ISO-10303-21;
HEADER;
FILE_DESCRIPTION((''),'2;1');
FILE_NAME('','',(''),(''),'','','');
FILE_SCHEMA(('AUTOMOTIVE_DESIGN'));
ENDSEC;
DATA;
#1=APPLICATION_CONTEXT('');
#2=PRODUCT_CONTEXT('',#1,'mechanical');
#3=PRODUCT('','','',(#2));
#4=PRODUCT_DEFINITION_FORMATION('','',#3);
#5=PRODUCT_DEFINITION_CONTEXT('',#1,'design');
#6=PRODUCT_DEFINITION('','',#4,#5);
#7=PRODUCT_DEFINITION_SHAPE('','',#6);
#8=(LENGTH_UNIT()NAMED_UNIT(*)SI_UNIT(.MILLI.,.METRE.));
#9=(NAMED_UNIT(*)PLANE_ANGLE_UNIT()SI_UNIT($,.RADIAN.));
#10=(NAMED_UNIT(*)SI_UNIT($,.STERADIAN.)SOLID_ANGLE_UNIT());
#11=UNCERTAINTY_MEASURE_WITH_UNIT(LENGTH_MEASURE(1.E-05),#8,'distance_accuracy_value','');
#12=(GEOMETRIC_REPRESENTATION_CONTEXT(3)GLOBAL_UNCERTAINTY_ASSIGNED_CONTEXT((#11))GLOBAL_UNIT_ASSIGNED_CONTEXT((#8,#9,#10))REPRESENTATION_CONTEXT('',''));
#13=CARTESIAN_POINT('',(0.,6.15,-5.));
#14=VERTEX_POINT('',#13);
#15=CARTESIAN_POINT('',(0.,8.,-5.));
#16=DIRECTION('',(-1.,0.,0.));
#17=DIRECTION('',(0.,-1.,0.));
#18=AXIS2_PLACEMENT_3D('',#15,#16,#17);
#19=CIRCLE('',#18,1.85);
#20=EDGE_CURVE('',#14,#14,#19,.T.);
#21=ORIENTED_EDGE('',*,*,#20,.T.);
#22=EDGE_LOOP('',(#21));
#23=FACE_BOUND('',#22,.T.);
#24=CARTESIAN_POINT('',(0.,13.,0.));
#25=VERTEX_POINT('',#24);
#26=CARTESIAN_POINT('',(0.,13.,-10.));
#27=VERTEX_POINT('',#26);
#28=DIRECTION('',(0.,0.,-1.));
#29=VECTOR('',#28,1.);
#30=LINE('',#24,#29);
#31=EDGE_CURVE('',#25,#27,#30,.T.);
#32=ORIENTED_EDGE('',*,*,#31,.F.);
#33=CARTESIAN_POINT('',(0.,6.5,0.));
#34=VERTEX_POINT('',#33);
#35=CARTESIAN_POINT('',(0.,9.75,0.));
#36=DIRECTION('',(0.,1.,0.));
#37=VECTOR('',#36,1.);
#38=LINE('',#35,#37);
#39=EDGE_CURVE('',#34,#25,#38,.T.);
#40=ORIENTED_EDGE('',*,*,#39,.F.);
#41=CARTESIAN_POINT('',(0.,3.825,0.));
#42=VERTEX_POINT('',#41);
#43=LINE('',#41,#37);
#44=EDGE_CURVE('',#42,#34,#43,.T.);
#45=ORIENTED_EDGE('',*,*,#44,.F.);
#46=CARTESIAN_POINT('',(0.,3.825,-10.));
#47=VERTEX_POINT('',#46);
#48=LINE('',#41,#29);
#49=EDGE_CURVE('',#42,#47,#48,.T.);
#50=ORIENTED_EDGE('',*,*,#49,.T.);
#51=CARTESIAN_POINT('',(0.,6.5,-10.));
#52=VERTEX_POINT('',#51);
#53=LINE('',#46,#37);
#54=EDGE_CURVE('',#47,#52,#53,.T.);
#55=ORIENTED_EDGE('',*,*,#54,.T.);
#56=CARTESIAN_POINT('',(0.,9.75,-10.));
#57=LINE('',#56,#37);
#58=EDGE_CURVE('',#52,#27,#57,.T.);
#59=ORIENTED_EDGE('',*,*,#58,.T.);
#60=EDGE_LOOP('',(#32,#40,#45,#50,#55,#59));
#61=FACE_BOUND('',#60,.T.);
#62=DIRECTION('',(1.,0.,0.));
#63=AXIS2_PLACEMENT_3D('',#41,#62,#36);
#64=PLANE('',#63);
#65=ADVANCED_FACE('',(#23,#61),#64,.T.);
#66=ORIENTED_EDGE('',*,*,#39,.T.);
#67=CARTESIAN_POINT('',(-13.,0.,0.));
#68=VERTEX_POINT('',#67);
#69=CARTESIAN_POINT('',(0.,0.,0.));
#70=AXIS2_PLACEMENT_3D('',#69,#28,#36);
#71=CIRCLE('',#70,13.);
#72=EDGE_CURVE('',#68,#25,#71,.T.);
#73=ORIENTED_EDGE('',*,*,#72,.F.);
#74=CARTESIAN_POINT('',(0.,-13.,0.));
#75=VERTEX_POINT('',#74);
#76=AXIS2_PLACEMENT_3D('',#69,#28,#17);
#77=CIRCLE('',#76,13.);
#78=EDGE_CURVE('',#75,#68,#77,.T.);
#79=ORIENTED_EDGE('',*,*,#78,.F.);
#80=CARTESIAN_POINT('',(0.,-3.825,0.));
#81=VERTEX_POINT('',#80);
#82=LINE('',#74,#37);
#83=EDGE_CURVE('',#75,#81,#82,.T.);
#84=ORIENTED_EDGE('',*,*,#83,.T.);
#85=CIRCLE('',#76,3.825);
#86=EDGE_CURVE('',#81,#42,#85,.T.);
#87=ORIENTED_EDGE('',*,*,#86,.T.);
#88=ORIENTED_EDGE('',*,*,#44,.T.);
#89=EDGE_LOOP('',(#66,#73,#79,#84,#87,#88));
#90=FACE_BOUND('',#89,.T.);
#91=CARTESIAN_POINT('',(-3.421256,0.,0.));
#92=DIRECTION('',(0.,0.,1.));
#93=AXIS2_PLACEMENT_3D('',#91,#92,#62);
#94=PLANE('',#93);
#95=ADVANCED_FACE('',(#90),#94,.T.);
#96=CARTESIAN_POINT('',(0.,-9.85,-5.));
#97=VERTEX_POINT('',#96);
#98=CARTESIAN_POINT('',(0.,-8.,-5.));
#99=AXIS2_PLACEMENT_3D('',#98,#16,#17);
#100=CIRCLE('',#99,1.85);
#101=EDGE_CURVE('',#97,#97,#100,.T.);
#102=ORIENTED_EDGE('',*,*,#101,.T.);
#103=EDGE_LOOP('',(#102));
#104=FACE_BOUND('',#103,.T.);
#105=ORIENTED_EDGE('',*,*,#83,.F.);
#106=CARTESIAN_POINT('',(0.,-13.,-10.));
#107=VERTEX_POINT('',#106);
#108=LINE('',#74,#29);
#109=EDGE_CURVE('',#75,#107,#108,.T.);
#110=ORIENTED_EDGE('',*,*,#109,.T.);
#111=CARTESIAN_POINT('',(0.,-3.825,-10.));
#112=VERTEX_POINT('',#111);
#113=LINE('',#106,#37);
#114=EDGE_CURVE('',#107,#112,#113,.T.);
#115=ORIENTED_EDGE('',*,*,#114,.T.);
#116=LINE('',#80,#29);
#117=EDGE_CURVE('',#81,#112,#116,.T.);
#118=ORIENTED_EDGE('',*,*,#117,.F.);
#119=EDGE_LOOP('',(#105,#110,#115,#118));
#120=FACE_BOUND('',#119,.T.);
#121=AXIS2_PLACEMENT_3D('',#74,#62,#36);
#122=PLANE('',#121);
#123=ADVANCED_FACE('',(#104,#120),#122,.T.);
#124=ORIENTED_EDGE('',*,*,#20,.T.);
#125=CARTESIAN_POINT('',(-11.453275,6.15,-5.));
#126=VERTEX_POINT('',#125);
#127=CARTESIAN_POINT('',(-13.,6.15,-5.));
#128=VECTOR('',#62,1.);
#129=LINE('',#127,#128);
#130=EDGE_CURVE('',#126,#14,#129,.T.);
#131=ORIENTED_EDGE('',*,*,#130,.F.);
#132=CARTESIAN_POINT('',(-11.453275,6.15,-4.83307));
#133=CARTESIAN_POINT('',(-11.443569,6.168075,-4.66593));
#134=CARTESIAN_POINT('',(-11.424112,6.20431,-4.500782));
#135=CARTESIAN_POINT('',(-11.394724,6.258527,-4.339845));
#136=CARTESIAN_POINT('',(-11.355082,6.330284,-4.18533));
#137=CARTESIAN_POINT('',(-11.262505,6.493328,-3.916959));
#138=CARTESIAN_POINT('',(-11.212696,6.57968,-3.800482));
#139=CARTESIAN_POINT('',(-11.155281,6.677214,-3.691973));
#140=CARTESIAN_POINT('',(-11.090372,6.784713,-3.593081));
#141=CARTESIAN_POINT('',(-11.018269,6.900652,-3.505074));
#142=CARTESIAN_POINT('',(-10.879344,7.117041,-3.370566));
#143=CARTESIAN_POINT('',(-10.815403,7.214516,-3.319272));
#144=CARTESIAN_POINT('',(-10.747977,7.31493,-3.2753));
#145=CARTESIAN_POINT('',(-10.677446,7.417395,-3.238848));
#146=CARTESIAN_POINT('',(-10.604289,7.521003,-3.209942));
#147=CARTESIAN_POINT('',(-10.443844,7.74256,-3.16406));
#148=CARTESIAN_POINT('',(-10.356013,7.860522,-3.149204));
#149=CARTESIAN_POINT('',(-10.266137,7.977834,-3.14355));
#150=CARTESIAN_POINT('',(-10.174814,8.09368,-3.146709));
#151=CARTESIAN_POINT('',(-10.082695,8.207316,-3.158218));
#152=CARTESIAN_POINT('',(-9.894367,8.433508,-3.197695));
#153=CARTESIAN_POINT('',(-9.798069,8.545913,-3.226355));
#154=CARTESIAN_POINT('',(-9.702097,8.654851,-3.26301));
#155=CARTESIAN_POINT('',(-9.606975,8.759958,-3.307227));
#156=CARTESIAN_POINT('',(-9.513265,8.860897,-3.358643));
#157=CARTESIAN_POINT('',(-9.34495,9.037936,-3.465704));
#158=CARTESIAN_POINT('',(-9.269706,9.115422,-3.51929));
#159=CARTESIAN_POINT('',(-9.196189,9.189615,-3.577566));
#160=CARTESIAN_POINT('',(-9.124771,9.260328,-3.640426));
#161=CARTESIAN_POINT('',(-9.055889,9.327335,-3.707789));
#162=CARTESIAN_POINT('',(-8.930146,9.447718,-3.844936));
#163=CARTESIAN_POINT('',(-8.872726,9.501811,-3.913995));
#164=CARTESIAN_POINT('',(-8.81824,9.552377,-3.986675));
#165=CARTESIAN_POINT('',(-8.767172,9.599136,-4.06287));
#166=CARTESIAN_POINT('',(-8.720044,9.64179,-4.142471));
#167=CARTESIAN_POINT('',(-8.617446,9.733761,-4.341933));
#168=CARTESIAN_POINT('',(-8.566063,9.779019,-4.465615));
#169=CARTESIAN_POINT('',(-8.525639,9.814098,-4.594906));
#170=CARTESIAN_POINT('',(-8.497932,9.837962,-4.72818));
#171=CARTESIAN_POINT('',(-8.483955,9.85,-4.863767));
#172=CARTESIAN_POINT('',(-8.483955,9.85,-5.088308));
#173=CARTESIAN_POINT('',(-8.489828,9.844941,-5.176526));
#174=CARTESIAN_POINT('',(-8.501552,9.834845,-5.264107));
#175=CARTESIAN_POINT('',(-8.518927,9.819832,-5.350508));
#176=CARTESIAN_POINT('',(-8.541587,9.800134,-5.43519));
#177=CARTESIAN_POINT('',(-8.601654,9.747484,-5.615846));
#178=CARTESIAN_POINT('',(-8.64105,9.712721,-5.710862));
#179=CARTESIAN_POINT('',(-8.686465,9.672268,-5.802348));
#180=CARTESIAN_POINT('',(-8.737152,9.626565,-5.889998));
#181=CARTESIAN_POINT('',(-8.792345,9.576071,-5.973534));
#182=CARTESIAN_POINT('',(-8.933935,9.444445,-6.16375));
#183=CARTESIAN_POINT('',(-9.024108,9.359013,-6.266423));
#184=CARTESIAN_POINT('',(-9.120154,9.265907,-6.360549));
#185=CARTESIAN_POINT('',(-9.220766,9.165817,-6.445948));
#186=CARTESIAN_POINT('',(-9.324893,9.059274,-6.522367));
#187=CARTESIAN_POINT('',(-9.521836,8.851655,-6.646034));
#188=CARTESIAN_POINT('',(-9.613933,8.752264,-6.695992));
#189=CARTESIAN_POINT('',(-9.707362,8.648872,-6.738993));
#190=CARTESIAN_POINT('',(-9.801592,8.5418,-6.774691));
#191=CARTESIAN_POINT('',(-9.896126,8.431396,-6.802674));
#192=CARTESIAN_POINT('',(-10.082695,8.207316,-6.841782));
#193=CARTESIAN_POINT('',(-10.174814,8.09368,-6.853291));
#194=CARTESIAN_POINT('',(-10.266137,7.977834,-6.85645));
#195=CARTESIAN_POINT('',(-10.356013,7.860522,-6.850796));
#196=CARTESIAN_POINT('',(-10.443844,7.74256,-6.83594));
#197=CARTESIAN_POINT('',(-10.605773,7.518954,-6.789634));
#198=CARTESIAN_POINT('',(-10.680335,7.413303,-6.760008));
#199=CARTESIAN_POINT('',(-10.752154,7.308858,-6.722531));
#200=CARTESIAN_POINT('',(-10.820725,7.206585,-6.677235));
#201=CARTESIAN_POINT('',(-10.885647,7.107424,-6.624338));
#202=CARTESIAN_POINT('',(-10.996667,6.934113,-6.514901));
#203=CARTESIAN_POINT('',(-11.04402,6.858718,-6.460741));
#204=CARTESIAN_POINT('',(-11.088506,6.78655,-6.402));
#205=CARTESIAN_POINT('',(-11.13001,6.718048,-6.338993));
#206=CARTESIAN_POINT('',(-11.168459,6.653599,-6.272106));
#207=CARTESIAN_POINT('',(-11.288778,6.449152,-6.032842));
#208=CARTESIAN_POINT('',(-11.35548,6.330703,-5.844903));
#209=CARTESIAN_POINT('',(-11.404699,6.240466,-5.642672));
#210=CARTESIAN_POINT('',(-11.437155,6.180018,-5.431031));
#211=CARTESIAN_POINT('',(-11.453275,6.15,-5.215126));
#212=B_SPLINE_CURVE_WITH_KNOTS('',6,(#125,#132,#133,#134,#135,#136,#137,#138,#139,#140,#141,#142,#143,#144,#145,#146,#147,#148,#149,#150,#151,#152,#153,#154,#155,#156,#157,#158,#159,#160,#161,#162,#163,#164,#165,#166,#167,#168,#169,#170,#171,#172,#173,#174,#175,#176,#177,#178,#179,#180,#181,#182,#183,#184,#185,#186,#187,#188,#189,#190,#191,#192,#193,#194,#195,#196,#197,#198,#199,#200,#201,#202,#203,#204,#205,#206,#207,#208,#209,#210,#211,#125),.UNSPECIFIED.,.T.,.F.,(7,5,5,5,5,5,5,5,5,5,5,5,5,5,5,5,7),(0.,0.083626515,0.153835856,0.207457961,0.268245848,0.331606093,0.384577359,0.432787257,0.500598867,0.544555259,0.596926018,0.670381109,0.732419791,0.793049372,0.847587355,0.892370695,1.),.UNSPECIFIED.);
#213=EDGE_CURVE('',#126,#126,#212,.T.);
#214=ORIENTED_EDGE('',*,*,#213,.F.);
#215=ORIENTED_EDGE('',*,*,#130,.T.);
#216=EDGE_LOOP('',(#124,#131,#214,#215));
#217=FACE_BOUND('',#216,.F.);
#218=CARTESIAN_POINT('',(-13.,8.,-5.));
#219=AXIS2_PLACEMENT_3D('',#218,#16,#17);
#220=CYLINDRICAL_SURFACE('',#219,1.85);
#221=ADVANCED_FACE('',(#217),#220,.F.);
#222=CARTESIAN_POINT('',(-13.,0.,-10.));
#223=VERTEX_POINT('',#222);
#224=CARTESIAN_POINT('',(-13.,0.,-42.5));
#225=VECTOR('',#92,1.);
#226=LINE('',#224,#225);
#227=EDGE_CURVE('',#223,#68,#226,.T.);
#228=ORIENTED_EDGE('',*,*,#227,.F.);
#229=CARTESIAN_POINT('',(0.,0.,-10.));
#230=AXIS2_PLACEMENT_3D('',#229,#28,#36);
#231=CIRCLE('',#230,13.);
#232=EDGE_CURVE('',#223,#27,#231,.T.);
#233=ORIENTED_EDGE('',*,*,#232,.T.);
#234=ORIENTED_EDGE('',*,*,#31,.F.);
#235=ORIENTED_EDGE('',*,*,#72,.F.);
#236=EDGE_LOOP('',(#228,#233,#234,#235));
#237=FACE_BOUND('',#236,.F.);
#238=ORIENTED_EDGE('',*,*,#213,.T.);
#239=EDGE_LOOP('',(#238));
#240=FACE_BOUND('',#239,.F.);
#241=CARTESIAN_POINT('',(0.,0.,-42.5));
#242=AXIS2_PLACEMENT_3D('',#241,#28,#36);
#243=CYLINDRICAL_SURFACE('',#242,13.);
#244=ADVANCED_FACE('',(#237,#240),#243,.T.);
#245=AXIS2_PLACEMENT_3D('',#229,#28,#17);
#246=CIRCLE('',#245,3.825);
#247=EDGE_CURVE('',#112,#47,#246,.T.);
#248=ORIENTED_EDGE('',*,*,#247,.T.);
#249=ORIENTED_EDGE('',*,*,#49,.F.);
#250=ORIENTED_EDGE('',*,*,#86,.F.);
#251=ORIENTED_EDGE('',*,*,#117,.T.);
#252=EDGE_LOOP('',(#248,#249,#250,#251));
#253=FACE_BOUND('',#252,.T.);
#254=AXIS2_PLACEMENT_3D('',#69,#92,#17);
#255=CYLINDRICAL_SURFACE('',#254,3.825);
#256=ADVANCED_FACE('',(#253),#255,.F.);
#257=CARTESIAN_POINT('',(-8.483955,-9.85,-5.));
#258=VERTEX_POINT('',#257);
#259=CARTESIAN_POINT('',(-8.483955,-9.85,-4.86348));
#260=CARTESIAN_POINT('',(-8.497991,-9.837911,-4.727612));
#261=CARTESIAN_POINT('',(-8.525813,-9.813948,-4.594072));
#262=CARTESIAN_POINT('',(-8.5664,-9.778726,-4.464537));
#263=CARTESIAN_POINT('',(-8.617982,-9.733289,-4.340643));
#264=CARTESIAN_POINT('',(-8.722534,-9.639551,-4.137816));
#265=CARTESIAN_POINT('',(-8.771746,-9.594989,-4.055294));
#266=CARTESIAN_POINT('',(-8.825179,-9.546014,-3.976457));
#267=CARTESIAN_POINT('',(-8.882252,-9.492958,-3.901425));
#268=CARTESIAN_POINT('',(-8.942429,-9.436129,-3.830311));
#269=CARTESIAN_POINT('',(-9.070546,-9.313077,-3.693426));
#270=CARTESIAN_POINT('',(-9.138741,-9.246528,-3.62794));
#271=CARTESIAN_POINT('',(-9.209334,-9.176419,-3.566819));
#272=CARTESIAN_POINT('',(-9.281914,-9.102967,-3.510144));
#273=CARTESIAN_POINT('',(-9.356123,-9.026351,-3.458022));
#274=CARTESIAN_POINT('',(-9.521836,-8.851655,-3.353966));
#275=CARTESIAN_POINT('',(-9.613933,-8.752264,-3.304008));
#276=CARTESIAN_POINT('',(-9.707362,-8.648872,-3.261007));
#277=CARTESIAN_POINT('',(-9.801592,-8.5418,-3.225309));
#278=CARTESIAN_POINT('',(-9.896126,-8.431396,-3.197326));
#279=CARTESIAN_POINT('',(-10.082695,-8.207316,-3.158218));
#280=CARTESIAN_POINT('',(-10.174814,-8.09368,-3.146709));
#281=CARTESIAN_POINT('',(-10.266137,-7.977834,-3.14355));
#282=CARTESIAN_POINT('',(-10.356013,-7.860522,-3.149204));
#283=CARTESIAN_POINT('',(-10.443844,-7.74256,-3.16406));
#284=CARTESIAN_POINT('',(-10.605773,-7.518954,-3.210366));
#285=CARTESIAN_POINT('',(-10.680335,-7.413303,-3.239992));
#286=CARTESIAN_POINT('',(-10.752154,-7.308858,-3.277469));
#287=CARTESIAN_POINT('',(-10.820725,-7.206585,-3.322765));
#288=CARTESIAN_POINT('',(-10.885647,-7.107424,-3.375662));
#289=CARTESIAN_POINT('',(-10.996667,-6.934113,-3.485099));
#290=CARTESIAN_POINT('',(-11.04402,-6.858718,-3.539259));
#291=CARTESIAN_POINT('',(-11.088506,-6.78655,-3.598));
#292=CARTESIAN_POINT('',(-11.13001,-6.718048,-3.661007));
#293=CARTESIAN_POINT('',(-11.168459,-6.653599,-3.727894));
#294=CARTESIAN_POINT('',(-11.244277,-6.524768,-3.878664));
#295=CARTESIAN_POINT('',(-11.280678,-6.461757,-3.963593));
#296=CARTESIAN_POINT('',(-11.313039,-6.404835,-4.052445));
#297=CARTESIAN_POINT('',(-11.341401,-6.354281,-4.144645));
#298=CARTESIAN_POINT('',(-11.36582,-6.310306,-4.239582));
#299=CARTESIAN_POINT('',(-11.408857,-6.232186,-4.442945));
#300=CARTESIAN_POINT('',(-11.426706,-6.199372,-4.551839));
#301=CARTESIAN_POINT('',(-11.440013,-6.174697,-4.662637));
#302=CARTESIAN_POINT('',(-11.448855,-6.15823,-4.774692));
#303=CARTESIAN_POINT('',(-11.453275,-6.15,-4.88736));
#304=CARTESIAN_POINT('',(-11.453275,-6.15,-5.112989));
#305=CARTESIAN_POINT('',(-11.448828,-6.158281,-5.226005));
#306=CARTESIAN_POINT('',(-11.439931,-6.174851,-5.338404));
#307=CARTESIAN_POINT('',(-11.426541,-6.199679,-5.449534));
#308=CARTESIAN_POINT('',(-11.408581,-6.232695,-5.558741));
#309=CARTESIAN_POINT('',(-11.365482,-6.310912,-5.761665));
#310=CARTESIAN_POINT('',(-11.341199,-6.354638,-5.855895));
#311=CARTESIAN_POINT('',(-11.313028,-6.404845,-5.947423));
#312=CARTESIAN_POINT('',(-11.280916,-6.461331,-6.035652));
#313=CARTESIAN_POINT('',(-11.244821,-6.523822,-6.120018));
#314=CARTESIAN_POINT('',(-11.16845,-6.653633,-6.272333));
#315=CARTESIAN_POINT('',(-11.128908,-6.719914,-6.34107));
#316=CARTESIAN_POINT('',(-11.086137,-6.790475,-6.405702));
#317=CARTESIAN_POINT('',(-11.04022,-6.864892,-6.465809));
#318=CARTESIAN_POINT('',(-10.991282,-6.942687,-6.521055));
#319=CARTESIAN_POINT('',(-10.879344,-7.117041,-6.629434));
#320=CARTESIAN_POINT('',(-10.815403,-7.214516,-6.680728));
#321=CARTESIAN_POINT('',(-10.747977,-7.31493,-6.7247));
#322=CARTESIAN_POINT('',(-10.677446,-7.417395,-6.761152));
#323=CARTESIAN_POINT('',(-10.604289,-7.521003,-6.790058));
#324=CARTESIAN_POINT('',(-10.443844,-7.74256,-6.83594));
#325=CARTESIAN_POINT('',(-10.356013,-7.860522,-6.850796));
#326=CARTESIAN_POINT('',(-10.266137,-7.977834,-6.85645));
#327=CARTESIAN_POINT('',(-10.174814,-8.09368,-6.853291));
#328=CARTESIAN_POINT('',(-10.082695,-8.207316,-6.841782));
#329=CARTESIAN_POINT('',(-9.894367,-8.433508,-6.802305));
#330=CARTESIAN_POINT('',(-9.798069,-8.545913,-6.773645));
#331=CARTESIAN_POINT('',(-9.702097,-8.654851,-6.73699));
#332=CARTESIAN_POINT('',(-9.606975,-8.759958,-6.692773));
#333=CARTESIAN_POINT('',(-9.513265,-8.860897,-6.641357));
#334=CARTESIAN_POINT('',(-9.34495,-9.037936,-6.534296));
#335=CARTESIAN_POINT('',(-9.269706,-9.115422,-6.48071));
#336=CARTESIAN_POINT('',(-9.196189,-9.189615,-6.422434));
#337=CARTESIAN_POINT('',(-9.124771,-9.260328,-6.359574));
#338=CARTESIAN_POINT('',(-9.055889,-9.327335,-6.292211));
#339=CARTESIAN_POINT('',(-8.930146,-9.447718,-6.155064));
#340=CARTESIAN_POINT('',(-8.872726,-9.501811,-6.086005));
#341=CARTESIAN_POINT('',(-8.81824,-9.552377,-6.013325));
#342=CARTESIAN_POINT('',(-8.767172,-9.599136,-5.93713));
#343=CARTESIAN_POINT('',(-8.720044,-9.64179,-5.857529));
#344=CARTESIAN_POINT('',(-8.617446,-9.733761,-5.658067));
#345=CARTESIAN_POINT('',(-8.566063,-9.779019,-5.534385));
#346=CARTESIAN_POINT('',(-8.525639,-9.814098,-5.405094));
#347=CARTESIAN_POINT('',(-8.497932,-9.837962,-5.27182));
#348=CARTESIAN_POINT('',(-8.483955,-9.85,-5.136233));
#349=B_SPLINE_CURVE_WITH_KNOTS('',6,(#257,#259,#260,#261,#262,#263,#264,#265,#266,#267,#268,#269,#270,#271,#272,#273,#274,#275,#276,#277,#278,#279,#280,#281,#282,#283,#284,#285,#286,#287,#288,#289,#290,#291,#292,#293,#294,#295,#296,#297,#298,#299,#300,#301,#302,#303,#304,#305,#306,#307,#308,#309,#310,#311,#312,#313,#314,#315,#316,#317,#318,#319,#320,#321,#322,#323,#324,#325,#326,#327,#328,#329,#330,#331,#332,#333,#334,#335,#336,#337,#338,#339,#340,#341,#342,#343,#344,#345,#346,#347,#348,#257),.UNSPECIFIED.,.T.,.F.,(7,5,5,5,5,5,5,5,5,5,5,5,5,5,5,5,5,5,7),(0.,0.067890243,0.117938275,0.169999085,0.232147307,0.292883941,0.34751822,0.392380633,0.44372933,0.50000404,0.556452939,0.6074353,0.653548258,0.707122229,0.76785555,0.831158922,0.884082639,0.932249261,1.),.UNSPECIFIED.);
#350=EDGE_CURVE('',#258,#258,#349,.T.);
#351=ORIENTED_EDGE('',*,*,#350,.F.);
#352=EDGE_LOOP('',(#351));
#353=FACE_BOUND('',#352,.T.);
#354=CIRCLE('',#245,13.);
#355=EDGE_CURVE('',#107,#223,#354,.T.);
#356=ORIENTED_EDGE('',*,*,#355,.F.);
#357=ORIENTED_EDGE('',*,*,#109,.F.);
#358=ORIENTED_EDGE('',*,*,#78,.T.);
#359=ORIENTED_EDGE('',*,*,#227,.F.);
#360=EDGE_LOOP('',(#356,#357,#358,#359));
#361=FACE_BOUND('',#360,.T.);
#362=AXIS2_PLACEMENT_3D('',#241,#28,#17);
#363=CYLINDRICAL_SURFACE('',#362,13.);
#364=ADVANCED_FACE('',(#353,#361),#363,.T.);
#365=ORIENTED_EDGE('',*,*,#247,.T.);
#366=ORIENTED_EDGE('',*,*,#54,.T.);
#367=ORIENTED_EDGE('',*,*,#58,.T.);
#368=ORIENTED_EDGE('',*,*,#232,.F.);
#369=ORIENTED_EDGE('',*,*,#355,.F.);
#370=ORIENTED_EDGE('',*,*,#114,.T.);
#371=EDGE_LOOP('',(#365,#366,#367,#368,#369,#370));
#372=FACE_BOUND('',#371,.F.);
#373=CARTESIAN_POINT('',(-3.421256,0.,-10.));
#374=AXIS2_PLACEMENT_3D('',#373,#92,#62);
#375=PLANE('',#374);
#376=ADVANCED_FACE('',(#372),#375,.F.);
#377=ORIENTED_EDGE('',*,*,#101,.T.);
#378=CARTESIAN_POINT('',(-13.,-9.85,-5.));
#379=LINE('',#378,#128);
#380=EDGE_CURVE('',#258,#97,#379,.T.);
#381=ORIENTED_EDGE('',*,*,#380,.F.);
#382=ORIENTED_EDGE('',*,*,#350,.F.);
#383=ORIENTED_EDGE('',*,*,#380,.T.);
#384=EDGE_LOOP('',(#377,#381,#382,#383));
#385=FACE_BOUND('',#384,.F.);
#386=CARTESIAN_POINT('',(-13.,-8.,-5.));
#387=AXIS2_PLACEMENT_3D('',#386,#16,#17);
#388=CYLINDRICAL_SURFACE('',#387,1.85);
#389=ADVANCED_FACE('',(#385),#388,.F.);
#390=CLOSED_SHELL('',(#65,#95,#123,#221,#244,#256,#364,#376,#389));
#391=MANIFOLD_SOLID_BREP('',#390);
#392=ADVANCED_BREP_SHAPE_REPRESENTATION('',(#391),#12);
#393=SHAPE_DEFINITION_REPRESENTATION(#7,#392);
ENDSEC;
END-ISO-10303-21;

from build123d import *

# Parameters (mm, degrees)
F0_W        = 6.7956063077
F0_H        = 13
F0_H_2      = 6.5
F0_W_2      = 6.2043936923
F1_DEPTH    = 10
F2_R        = 1.85
F3_DEPTH    = 13
F4_T1_DEPTH = 75


# Not quite as in the source:
# - a fillet or chamfer that OpenCascade refuses, or shapes differently, is made with other operations: its cross-section is extruded or revolved along the edge and cut away or added
# - a feature names something its author has since deleted; it is built from what else it names


with BuildPart() as f1:
    # F0 (on Top) → F1 (new body)
    with BuildSketch(Plane.XY):
        with BuildLine():
            Line((0, 6.5), (-6.2043936923, 6.5))
            Line((-6.2043936923, 6.5), (-6.2043936923, -6.5))
            Line((-6.2043936923, -6.5), (0, -6.5))
            Line((0, -6.5), (0, -3.825))
            ThreePointArc((0, -3.825), (-3.825, 0), (0, 3.825))
            Line((0, 3.825), (0, 6.5))
        make_face()
        with Locations((-9.6021968462, 0)):
            Rectangle(F0_W, F0_H)
        with Locations((-9.6021968462, 9.75)):
            Rectangle(F0_W, F0_H_2)
        with Locations((-3.1021968462, 9.75)):
            Rectangle(F0_W_2, F0_H_2)
        Polygon((-6.2043936923, -6.5), (-13, -6.5), (-13, -13), (0, -13), (0, -6.5), align=None)
    extrude(amount=-F1_DEPTH)

    # F2 (on face) → F3 (cut, through all)
    with BuildSketch(Plane(origin=(-13, 0, 0), x_dir=(0, -1, 0), z_dir=(-1, 0, 0))):
        with Locations((-8, -5)):
            Circle(F2_R)
        with Locations((8, -5)):
            Circle(F2_R)
    extrude(amount=-F3_DEPTH, mode=Mode.SUBTRACT)

    # F4: fillet of radius 13 on 2 edges, made by hand

    # F4_s2 → F4_t1 (cut)
    with BuildSketch(Plane.XY.offset(-42.5)):
        with BuildLine():
            ThreePointArc((0, 13), (-9.1923881554, 9.1923881554), (-13, 0))
            Line((-13, 0), (-13, 13))
            Line((-13, 13), (0, 13))
        make_face()
        with BuildLine():
            ThreePointArc((0, -13), (-9.1923881554, -9.1923881554), (-13, 0))
            Line((-13, 0), (-13, -13))
            Line((-13, -13), (0, -13))
        make_face()
    extrude(amount=F4_T1_DEPTH, mode=Mode.SUBTRACT)


solid = f1.part
